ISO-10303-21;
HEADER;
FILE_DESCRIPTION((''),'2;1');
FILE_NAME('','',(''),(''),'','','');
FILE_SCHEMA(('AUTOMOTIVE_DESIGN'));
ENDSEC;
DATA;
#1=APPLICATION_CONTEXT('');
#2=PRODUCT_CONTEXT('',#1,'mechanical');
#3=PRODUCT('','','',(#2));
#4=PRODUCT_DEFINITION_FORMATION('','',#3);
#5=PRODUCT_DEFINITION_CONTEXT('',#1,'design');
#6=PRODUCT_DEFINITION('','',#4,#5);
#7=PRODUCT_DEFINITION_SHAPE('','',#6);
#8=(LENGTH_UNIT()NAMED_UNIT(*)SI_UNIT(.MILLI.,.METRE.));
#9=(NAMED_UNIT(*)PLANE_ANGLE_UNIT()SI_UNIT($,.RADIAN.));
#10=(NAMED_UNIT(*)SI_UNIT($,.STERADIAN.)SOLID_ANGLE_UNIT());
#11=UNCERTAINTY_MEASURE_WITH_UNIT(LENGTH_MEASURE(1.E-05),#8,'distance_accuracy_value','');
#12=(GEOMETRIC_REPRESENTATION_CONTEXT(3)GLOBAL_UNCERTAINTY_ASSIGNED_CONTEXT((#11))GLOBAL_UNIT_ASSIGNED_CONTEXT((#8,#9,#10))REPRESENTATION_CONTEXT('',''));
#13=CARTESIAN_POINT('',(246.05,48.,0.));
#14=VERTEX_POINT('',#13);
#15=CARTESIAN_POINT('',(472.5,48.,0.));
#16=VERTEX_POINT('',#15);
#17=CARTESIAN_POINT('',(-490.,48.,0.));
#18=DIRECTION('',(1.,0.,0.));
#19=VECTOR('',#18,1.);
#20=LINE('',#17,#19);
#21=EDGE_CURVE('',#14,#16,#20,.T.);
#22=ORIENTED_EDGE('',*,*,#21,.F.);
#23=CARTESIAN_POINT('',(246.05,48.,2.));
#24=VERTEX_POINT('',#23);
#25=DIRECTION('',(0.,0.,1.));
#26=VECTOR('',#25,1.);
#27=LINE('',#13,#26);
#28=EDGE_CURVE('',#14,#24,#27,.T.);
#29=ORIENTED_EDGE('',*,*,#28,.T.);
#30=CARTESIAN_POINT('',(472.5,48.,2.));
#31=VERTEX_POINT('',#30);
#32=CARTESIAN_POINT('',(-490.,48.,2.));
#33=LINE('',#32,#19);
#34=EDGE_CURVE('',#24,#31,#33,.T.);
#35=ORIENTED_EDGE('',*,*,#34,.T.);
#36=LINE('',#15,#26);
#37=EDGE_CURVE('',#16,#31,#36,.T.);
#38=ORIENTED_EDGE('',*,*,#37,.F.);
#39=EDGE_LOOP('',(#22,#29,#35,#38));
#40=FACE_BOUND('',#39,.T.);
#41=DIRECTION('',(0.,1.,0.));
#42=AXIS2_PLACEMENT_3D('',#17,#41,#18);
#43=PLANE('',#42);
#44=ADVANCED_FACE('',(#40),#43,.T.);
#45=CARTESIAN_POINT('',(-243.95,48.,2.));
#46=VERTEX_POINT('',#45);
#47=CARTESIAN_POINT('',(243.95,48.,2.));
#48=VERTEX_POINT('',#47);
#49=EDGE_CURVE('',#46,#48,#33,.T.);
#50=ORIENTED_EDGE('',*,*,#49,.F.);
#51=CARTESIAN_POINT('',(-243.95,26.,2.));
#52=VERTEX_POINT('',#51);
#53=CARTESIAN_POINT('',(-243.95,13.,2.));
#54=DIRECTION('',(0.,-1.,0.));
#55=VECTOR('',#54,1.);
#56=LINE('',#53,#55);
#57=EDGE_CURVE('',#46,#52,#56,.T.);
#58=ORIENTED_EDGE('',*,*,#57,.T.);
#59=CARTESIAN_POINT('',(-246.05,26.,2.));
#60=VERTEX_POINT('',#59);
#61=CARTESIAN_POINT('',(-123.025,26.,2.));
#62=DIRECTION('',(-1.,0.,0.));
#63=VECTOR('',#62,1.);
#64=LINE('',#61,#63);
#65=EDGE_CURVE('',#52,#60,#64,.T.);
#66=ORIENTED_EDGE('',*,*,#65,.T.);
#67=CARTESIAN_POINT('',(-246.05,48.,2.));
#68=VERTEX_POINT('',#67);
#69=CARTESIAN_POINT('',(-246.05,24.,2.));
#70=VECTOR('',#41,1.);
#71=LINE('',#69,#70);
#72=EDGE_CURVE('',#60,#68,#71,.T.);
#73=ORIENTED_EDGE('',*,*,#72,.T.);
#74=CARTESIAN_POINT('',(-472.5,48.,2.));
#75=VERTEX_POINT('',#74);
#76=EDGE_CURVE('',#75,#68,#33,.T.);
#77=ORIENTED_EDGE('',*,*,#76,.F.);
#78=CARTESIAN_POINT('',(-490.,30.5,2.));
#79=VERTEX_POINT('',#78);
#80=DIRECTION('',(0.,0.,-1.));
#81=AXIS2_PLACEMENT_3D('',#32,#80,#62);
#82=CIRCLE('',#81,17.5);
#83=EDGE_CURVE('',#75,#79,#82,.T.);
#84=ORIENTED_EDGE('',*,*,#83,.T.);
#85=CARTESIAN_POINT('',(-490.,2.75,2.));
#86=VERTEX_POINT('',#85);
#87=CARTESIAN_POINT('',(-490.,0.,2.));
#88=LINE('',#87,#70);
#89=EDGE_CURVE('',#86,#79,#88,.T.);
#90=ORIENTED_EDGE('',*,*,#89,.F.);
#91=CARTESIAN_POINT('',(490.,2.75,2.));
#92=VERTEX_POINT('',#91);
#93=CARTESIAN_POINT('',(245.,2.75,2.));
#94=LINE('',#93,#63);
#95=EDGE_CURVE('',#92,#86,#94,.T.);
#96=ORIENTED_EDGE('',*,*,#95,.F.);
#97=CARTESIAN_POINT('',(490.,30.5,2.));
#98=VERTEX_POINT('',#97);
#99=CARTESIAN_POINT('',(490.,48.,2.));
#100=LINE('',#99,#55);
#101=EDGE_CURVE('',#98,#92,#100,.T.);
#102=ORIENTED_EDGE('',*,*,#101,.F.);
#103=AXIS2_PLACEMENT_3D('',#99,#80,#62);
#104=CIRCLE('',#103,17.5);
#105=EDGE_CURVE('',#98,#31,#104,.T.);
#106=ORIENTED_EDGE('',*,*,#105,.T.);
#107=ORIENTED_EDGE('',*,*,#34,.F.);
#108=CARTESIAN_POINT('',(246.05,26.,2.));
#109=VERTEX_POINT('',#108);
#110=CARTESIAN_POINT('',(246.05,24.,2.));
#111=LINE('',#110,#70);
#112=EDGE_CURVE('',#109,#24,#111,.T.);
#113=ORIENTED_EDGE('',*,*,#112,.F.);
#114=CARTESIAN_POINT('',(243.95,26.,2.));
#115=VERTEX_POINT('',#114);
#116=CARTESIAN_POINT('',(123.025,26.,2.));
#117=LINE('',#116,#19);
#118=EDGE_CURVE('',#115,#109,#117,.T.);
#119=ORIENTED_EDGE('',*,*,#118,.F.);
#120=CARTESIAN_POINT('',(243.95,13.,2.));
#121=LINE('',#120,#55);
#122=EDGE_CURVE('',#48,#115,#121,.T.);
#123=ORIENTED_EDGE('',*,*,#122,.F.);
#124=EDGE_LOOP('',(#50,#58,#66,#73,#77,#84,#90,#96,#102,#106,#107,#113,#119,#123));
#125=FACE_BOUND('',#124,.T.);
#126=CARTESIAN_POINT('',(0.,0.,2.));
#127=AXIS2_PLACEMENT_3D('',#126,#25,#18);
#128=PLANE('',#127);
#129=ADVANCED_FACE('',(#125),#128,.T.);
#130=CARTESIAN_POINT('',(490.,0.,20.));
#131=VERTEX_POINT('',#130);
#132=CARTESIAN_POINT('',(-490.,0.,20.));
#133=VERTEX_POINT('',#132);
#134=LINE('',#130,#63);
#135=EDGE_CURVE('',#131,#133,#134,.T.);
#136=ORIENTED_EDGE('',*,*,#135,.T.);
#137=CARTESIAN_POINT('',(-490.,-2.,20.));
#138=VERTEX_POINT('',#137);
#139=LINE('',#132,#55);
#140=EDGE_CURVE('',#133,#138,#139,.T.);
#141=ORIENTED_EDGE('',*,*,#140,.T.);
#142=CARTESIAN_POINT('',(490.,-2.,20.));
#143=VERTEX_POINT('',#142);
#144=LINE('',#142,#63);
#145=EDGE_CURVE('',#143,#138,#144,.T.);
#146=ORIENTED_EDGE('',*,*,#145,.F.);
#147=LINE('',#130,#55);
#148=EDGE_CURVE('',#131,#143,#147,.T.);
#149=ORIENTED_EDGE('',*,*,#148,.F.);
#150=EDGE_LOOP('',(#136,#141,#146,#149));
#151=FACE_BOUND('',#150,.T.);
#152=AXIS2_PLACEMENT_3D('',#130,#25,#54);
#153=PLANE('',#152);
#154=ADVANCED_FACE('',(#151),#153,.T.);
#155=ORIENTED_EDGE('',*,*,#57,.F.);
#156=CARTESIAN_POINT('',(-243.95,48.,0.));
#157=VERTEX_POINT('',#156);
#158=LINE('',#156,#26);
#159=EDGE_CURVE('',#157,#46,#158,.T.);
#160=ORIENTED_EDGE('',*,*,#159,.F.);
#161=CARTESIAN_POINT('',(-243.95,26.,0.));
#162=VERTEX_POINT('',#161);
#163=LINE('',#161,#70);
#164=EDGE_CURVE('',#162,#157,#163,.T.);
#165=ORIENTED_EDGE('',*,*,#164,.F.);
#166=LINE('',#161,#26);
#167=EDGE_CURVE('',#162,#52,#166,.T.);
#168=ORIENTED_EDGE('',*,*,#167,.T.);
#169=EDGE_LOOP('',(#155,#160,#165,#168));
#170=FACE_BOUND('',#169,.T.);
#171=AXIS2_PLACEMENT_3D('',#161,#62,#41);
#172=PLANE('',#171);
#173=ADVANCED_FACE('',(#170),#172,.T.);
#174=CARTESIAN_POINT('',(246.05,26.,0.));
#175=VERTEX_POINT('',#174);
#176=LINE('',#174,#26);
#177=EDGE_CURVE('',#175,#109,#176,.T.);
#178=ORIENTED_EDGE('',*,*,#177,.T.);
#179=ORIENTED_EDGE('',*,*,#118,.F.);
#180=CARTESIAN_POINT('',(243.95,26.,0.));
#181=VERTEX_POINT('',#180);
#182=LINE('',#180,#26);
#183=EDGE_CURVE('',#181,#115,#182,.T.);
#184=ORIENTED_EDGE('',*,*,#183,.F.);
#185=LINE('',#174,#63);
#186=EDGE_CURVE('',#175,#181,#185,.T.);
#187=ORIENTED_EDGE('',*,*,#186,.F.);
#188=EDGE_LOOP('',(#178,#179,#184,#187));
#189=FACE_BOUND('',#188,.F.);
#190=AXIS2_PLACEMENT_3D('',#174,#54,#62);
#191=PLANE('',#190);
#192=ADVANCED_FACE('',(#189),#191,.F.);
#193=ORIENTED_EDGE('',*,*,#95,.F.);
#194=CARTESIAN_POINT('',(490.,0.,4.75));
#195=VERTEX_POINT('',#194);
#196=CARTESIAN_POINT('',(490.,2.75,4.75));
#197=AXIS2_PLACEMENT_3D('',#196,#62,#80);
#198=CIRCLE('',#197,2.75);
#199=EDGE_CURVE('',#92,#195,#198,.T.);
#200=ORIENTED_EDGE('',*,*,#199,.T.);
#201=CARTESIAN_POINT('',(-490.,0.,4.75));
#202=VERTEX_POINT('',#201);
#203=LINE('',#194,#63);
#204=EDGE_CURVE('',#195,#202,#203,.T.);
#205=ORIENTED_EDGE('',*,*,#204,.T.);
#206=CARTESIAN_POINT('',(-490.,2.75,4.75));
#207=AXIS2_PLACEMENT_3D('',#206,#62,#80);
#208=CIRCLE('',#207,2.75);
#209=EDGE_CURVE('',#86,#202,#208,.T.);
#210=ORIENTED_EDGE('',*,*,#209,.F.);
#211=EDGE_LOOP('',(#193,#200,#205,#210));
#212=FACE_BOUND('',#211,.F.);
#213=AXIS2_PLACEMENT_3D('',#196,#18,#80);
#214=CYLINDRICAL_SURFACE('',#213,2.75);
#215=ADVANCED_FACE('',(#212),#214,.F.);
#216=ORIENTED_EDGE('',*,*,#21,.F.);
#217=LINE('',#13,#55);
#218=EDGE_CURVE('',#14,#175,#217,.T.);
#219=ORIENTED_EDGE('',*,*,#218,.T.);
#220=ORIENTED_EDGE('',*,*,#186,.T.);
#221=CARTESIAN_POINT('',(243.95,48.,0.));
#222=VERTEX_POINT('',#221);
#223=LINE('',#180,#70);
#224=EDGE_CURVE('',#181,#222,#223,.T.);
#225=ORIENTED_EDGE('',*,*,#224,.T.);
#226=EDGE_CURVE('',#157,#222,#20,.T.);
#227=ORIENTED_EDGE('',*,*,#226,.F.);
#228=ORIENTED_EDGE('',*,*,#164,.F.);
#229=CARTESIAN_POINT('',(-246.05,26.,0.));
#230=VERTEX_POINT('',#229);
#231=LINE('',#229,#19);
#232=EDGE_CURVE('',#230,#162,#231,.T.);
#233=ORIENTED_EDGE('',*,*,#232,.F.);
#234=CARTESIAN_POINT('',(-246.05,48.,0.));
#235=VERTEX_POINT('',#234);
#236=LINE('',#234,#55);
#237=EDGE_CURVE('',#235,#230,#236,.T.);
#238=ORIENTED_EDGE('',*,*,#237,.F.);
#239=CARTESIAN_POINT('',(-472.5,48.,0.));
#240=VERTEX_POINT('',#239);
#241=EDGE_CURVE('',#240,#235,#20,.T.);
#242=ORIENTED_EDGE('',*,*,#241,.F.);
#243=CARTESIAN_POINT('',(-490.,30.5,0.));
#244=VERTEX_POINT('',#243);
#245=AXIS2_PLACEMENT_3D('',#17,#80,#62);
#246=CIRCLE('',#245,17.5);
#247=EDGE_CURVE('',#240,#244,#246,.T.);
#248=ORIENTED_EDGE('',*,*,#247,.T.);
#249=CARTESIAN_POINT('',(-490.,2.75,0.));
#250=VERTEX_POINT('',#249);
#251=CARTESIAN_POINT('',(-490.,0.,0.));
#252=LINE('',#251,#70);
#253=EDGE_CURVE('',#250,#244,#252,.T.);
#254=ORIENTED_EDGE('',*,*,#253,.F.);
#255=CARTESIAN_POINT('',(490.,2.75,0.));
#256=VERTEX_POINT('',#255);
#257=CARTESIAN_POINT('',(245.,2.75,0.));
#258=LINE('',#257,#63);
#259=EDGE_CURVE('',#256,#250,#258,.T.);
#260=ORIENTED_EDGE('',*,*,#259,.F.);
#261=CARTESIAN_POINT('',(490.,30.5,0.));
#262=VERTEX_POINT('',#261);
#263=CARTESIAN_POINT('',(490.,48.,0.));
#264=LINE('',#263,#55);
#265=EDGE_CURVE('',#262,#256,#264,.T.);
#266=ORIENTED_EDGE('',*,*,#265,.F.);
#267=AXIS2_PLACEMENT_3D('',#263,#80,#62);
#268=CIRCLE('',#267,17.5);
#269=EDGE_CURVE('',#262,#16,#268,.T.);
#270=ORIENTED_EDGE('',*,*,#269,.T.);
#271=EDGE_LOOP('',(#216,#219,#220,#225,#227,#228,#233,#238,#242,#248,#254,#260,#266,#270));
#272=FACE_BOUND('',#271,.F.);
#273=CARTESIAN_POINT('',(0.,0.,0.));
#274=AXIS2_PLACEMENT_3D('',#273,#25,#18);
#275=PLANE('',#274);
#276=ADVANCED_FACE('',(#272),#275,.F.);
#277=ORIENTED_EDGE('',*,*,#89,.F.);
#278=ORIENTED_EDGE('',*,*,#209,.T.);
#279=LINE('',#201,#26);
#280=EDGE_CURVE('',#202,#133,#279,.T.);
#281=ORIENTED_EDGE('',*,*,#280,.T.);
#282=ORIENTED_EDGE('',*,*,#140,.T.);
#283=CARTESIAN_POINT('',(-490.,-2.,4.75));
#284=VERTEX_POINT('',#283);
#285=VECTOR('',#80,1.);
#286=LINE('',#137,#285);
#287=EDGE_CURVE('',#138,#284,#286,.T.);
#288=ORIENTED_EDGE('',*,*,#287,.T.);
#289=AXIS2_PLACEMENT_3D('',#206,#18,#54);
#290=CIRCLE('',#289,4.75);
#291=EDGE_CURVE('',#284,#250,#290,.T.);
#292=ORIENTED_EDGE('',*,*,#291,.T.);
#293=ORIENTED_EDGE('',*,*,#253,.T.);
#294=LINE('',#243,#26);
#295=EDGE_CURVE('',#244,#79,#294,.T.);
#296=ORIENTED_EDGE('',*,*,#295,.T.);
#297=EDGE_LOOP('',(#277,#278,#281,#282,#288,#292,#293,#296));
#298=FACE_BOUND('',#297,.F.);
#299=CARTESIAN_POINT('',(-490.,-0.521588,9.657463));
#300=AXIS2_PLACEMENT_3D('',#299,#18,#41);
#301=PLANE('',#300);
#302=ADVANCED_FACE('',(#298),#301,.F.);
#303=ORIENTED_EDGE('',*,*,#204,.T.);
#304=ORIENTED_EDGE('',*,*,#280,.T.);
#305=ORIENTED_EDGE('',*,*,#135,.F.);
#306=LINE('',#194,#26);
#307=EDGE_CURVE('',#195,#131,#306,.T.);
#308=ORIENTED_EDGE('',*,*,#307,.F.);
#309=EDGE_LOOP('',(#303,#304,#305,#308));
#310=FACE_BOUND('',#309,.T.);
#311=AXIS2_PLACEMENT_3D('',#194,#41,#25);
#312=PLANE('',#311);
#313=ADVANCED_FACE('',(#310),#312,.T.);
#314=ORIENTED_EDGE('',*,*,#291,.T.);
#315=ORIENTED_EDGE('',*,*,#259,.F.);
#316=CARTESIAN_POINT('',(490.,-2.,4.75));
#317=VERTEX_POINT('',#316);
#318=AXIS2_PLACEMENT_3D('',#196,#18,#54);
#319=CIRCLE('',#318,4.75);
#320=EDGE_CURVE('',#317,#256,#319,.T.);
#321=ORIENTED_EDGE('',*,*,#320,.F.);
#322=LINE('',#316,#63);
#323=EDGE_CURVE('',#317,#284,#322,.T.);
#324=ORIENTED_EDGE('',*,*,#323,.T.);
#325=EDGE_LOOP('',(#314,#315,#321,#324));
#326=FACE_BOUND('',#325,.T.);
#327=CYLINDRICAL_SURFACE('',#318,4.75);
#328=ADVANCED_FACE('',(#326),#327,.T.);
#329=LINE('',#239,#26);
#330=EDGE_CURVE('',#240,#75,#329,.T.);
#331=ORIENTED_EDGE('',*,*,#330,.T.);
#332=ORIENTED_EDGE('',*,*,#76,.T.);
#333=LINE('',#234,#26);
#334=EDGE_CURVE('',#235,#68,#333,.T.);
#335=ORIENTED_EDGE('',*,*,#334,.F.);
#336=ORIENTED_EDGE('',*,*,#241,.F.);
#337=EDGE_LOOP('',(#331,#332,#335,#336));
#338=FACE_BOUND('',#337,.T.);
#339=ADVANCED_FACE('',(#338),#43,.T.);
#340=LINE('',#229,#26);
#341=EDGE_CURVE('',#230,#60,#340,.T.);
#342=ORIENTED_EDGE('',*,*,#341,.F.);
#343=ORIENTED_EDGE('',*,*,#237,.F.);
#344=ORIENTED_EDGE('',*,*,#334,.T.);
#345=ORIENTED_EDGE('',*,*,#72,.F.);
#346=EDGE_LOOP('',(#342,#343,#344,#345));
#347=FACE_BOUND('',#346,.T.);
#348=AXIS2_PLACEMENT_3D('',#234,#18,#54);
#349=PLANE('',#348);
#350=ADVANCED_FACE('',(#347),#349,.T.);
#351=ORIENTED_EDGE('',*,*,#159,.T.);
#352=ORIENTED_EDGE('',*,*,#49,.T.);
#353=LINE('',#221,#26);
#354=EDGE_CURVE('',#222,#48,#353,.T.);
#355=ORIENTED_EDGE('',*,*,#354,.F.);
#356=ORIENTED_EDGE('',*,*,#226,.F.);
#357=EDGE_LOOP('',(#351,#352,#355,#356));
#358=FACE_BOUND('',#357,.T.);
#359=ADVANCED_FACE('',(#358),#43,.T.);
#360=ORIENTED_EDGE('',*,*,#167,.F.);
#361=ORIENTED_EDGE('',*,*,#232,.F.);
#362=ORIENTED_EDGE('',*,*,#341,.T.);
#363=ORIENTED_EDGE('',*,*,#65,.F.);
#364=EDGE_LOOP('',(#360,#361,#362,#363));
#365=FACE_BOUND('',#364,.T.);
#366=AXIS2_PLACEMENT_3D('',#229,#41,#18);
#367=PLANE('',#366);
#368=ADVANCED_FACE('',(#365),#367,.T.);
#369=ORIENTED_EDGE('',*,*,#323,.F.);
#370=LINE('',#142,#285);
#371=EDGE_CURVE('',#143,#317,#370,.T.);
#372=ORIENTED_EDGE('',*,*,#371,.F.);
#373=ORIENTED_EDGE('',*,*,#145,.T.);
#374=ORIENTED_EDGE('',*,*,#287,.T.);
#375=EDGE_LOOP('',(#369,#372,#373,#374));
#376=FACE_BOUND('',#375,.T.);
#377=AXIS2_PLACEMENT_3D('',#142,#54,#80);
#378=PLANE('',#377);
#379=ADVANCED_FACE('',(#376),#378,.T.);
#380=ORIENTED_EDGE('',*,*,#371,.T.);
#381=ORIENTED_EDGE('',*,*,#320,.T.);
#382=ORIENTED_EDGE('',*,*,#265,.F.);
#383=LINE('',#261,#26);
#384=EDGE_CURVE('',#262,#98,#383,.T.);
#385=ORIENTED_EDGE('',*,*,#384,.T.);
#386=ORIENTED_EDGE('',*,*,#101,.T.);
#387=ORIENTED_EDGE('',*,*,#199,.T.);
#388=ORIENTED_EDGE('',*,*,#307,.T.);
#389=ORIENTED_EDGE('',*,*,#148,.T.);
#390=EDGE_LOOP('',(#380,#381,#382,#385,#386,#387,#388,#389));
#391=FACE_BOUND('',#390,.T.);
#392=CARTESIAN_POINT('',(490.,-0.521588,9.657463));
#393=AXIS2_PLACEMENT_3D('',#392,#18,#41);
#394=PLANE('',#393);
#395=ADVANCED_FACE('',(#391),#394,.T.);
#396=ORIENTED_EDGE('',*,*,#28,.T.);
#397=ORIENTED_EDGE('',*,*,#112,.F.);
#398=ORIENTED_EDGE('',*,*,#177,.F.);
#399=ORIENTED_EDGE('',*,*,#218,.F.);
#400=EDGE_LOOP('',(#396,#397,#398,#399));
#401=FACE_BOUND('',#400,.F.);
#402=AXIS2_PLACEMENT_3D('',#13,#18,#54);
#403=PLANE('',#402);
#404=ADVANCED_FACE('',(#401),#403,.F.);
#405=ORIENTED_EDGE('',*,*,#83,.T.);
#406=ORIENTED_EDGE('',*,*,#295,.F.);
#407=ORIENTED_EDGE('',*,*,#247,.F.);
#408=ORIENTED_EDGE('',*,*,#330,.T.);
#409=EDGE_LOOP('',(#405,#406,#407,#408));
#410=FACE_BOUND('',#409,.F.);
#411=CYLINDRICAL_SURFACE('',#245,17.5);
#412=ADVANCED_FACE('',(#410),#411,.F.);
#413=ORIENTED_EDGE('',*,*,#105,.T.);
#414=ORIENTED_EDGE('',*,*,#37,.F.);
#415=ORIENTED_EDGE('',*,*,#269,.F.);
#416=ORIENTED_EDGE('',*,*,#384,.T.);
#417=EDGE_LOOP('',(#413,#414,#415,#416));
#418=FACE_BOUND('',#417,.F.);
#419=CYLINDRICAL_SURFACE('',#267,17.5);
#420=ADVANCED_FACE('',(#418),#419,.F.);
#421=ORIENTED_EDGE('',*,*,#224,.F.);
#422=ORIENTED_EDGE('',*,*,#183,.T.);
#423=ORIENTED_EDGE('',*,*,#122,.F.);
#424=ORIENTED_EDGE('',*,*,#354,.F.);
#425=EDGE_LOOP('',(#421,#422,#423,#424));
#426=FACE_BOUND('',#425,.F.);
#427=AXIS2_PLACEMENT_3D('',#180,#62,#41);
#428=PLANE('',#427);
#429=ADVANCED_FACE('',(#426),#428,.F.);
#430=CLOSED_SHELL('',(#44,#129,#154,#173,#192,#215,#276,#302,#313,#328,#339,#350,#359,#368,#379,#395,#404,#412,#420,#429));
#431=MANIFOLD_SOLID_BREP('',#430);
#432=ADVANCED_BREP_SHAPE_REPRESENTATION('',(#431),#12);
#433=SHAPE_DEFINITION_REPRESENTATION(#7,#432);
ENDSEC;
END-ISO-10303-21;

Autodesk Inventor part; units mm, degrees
ref_plane "YZ Plane" through (0, 0, 0) normal (1, 0, 0) x (0, 1, 0)
ref_plane "XZ Plane" through (0, 0, 0) normal (0, 1, 0) x (-1, 0, 0)
ref_plane "XY Plane" through (0, 0, 0) normal (0, 0, 1) x (1, 0, 0)
sketch "Sketch1" plane through (0, 0, 0) normal (0, 0, 1) x (1, 0, 0)
  line L0 (-490, 48) -> (490, 48)
  line L1 (490, 48) -> (490, 0)
  line L2 (490, 0) -> (-490, 0)
  line L3 (-490, 0) -> (-490, 48)
  point P0 (0, 0)
  point P1 (0, 0)
  dimension "d0" = 980
  dimension "d1" = 48
extrude "Plate1" add sketch "Sketch1" along normal blind 2
sketch "Sketch2" plane through (490, -2, 0) normal (0, 1, 0) x (-1, 0, 0)
  line L0 (980, 0) -> (0, 0)
  line L1 (0, 0) -> (0, 20)
  line L2 (0, 20) -> (980, 20)
  line L3 (980, 20) -> (980, 0)
edge flange "Flange1" height 20 angle 90 thickness 2 bend radius 2.75 thickness toward (0, 1, 0) relief round relief width 2 relief depth 1 edges at (0, 0, 2) wall of the first edge with corners at (-490, -2, 0) (490, -2, 0) (490, -2, 20) (-490, -2, 20)
bend "Bend1"
corner "Corner1"
sketch "Sketch5" plane through (0, 0, 0) normal (0, 0, -1) x (-1, 0, 0)
  line L0 (490, 48) -> (-490, 48) projected
  line L1 (490, -2) -> (-490, -2) projected
  circle A0 centre (0, 48) radius 17.5
  line L2 (243.95, 48) -> (246.05, 48)
  line L3 (246.05, 48) -> (246.05, 26)
  line L4 (246.05, 26) -> (243.95, 26)
  line L5 (243.95, 26) -> (243.95, 48)
  line L6 (-243.95, 48) -> (-246.05, 48)
  line L7 (-246.05, 48) -> (-246.05, 26)
  line L8 (-246.05, 26) -> (-243.95, 26)
  line L9 (-243.95, 26) -> (-243.95, 48)
  line L10 (0, 48) -> (0, -2) construction
  line L11 (490, -2) -> (490, 48)
  line L12 (-490, -2) -> (-490, 48)
  circle A1 centre (-490, 48) radius 17.5
  circle A2 centre (490, 48) radius 17.5
  point P0 (0, 0)
  point P1 (245, 26)
  point P2 (-245, 26)
  point P3 (246.05, 48)
  point P4 (-17.5, 48)
  point P5 (17.5, 48)
  point P6 (-246.05, 48)
  point P7 (472.5, 48)
  point P8 (490, 30.5)
  point P9 (-490, 30.5)
  point P10 (-472.5, 48)
  dimension "d45" = 35
  dimension "d48" = 2.1
  dimension "d49" = 490
  dimension "d51" = 28
  dimension "d52" = 22
extrude "Extrusion1" cut sketch "Sketch5" against normal through all contours L3 L4 L5 L0 | L0 L11 A2 | L9 L8 L7 L0 | L12 L0 A1 picked at (488.702, 36.4796) picked at (-478.4796, 46.702)
sketch "Sketch9" plane through (0, 0, 2) normal (0, 0, 1) x (1, 0, 0)
  line L0 (448.2795, 24.3045) -> (448.2795, 12.3045) construction
  line L1 (448.2795, 12.3045) -> (248.2795, 12.3045) construction
  line L2 (248.2795, 12.3045) -> (248.2795, 24.3045) construction
  line L3 (248.2795, 24.3045) -> (448.2795, 24.3045) construction
  line L4 (-490, 48) -> (490, 48) projected
  point P0 (0, 0)
  point P1 (1.05, 68)
  point P2 (490, 48)
  point P3 (-490, 48)
  dimension "d40" = 200
  dimension "d41" = 12
mark "Mark2"
equation "\"d2\" = Thickness"
equation "\"d3\" = BendReliefWidth"
equation "\"d4\" = BendReliefDepth"
equation "\"d5\" = MinimumRemnant"
equation "\"d6\" = TransitionRadius"
equation "\"d9\" = BendRadius"
equation "\"d10\" = CornerReliefSize"
equation "\"d11\" = GapSize"
equation "\"d12\" = JacobiRadiusSize"
equation "\"BendReliefWidth\" = Thickness"
equation "\"BendReliefDepth\" = 0.5 * Thickness"
equation "\"CornerReliefSize\" = 4 * Thickness"
equation "\"MinimumRemnant\" = 2 * Thickness"
equation "\"TransitionRadius\" = BendRadius"
equation "\"JacobiRadiusSize\" = BendRadius"
equation "\"GapSize\" = Thickness"
equation "\"Thickness\" = 2"
equation "\"BendRadius\" = 2.75"
properties part number "MSC 326 STRINGER BOARD  ##" material "Stainless Steel"
